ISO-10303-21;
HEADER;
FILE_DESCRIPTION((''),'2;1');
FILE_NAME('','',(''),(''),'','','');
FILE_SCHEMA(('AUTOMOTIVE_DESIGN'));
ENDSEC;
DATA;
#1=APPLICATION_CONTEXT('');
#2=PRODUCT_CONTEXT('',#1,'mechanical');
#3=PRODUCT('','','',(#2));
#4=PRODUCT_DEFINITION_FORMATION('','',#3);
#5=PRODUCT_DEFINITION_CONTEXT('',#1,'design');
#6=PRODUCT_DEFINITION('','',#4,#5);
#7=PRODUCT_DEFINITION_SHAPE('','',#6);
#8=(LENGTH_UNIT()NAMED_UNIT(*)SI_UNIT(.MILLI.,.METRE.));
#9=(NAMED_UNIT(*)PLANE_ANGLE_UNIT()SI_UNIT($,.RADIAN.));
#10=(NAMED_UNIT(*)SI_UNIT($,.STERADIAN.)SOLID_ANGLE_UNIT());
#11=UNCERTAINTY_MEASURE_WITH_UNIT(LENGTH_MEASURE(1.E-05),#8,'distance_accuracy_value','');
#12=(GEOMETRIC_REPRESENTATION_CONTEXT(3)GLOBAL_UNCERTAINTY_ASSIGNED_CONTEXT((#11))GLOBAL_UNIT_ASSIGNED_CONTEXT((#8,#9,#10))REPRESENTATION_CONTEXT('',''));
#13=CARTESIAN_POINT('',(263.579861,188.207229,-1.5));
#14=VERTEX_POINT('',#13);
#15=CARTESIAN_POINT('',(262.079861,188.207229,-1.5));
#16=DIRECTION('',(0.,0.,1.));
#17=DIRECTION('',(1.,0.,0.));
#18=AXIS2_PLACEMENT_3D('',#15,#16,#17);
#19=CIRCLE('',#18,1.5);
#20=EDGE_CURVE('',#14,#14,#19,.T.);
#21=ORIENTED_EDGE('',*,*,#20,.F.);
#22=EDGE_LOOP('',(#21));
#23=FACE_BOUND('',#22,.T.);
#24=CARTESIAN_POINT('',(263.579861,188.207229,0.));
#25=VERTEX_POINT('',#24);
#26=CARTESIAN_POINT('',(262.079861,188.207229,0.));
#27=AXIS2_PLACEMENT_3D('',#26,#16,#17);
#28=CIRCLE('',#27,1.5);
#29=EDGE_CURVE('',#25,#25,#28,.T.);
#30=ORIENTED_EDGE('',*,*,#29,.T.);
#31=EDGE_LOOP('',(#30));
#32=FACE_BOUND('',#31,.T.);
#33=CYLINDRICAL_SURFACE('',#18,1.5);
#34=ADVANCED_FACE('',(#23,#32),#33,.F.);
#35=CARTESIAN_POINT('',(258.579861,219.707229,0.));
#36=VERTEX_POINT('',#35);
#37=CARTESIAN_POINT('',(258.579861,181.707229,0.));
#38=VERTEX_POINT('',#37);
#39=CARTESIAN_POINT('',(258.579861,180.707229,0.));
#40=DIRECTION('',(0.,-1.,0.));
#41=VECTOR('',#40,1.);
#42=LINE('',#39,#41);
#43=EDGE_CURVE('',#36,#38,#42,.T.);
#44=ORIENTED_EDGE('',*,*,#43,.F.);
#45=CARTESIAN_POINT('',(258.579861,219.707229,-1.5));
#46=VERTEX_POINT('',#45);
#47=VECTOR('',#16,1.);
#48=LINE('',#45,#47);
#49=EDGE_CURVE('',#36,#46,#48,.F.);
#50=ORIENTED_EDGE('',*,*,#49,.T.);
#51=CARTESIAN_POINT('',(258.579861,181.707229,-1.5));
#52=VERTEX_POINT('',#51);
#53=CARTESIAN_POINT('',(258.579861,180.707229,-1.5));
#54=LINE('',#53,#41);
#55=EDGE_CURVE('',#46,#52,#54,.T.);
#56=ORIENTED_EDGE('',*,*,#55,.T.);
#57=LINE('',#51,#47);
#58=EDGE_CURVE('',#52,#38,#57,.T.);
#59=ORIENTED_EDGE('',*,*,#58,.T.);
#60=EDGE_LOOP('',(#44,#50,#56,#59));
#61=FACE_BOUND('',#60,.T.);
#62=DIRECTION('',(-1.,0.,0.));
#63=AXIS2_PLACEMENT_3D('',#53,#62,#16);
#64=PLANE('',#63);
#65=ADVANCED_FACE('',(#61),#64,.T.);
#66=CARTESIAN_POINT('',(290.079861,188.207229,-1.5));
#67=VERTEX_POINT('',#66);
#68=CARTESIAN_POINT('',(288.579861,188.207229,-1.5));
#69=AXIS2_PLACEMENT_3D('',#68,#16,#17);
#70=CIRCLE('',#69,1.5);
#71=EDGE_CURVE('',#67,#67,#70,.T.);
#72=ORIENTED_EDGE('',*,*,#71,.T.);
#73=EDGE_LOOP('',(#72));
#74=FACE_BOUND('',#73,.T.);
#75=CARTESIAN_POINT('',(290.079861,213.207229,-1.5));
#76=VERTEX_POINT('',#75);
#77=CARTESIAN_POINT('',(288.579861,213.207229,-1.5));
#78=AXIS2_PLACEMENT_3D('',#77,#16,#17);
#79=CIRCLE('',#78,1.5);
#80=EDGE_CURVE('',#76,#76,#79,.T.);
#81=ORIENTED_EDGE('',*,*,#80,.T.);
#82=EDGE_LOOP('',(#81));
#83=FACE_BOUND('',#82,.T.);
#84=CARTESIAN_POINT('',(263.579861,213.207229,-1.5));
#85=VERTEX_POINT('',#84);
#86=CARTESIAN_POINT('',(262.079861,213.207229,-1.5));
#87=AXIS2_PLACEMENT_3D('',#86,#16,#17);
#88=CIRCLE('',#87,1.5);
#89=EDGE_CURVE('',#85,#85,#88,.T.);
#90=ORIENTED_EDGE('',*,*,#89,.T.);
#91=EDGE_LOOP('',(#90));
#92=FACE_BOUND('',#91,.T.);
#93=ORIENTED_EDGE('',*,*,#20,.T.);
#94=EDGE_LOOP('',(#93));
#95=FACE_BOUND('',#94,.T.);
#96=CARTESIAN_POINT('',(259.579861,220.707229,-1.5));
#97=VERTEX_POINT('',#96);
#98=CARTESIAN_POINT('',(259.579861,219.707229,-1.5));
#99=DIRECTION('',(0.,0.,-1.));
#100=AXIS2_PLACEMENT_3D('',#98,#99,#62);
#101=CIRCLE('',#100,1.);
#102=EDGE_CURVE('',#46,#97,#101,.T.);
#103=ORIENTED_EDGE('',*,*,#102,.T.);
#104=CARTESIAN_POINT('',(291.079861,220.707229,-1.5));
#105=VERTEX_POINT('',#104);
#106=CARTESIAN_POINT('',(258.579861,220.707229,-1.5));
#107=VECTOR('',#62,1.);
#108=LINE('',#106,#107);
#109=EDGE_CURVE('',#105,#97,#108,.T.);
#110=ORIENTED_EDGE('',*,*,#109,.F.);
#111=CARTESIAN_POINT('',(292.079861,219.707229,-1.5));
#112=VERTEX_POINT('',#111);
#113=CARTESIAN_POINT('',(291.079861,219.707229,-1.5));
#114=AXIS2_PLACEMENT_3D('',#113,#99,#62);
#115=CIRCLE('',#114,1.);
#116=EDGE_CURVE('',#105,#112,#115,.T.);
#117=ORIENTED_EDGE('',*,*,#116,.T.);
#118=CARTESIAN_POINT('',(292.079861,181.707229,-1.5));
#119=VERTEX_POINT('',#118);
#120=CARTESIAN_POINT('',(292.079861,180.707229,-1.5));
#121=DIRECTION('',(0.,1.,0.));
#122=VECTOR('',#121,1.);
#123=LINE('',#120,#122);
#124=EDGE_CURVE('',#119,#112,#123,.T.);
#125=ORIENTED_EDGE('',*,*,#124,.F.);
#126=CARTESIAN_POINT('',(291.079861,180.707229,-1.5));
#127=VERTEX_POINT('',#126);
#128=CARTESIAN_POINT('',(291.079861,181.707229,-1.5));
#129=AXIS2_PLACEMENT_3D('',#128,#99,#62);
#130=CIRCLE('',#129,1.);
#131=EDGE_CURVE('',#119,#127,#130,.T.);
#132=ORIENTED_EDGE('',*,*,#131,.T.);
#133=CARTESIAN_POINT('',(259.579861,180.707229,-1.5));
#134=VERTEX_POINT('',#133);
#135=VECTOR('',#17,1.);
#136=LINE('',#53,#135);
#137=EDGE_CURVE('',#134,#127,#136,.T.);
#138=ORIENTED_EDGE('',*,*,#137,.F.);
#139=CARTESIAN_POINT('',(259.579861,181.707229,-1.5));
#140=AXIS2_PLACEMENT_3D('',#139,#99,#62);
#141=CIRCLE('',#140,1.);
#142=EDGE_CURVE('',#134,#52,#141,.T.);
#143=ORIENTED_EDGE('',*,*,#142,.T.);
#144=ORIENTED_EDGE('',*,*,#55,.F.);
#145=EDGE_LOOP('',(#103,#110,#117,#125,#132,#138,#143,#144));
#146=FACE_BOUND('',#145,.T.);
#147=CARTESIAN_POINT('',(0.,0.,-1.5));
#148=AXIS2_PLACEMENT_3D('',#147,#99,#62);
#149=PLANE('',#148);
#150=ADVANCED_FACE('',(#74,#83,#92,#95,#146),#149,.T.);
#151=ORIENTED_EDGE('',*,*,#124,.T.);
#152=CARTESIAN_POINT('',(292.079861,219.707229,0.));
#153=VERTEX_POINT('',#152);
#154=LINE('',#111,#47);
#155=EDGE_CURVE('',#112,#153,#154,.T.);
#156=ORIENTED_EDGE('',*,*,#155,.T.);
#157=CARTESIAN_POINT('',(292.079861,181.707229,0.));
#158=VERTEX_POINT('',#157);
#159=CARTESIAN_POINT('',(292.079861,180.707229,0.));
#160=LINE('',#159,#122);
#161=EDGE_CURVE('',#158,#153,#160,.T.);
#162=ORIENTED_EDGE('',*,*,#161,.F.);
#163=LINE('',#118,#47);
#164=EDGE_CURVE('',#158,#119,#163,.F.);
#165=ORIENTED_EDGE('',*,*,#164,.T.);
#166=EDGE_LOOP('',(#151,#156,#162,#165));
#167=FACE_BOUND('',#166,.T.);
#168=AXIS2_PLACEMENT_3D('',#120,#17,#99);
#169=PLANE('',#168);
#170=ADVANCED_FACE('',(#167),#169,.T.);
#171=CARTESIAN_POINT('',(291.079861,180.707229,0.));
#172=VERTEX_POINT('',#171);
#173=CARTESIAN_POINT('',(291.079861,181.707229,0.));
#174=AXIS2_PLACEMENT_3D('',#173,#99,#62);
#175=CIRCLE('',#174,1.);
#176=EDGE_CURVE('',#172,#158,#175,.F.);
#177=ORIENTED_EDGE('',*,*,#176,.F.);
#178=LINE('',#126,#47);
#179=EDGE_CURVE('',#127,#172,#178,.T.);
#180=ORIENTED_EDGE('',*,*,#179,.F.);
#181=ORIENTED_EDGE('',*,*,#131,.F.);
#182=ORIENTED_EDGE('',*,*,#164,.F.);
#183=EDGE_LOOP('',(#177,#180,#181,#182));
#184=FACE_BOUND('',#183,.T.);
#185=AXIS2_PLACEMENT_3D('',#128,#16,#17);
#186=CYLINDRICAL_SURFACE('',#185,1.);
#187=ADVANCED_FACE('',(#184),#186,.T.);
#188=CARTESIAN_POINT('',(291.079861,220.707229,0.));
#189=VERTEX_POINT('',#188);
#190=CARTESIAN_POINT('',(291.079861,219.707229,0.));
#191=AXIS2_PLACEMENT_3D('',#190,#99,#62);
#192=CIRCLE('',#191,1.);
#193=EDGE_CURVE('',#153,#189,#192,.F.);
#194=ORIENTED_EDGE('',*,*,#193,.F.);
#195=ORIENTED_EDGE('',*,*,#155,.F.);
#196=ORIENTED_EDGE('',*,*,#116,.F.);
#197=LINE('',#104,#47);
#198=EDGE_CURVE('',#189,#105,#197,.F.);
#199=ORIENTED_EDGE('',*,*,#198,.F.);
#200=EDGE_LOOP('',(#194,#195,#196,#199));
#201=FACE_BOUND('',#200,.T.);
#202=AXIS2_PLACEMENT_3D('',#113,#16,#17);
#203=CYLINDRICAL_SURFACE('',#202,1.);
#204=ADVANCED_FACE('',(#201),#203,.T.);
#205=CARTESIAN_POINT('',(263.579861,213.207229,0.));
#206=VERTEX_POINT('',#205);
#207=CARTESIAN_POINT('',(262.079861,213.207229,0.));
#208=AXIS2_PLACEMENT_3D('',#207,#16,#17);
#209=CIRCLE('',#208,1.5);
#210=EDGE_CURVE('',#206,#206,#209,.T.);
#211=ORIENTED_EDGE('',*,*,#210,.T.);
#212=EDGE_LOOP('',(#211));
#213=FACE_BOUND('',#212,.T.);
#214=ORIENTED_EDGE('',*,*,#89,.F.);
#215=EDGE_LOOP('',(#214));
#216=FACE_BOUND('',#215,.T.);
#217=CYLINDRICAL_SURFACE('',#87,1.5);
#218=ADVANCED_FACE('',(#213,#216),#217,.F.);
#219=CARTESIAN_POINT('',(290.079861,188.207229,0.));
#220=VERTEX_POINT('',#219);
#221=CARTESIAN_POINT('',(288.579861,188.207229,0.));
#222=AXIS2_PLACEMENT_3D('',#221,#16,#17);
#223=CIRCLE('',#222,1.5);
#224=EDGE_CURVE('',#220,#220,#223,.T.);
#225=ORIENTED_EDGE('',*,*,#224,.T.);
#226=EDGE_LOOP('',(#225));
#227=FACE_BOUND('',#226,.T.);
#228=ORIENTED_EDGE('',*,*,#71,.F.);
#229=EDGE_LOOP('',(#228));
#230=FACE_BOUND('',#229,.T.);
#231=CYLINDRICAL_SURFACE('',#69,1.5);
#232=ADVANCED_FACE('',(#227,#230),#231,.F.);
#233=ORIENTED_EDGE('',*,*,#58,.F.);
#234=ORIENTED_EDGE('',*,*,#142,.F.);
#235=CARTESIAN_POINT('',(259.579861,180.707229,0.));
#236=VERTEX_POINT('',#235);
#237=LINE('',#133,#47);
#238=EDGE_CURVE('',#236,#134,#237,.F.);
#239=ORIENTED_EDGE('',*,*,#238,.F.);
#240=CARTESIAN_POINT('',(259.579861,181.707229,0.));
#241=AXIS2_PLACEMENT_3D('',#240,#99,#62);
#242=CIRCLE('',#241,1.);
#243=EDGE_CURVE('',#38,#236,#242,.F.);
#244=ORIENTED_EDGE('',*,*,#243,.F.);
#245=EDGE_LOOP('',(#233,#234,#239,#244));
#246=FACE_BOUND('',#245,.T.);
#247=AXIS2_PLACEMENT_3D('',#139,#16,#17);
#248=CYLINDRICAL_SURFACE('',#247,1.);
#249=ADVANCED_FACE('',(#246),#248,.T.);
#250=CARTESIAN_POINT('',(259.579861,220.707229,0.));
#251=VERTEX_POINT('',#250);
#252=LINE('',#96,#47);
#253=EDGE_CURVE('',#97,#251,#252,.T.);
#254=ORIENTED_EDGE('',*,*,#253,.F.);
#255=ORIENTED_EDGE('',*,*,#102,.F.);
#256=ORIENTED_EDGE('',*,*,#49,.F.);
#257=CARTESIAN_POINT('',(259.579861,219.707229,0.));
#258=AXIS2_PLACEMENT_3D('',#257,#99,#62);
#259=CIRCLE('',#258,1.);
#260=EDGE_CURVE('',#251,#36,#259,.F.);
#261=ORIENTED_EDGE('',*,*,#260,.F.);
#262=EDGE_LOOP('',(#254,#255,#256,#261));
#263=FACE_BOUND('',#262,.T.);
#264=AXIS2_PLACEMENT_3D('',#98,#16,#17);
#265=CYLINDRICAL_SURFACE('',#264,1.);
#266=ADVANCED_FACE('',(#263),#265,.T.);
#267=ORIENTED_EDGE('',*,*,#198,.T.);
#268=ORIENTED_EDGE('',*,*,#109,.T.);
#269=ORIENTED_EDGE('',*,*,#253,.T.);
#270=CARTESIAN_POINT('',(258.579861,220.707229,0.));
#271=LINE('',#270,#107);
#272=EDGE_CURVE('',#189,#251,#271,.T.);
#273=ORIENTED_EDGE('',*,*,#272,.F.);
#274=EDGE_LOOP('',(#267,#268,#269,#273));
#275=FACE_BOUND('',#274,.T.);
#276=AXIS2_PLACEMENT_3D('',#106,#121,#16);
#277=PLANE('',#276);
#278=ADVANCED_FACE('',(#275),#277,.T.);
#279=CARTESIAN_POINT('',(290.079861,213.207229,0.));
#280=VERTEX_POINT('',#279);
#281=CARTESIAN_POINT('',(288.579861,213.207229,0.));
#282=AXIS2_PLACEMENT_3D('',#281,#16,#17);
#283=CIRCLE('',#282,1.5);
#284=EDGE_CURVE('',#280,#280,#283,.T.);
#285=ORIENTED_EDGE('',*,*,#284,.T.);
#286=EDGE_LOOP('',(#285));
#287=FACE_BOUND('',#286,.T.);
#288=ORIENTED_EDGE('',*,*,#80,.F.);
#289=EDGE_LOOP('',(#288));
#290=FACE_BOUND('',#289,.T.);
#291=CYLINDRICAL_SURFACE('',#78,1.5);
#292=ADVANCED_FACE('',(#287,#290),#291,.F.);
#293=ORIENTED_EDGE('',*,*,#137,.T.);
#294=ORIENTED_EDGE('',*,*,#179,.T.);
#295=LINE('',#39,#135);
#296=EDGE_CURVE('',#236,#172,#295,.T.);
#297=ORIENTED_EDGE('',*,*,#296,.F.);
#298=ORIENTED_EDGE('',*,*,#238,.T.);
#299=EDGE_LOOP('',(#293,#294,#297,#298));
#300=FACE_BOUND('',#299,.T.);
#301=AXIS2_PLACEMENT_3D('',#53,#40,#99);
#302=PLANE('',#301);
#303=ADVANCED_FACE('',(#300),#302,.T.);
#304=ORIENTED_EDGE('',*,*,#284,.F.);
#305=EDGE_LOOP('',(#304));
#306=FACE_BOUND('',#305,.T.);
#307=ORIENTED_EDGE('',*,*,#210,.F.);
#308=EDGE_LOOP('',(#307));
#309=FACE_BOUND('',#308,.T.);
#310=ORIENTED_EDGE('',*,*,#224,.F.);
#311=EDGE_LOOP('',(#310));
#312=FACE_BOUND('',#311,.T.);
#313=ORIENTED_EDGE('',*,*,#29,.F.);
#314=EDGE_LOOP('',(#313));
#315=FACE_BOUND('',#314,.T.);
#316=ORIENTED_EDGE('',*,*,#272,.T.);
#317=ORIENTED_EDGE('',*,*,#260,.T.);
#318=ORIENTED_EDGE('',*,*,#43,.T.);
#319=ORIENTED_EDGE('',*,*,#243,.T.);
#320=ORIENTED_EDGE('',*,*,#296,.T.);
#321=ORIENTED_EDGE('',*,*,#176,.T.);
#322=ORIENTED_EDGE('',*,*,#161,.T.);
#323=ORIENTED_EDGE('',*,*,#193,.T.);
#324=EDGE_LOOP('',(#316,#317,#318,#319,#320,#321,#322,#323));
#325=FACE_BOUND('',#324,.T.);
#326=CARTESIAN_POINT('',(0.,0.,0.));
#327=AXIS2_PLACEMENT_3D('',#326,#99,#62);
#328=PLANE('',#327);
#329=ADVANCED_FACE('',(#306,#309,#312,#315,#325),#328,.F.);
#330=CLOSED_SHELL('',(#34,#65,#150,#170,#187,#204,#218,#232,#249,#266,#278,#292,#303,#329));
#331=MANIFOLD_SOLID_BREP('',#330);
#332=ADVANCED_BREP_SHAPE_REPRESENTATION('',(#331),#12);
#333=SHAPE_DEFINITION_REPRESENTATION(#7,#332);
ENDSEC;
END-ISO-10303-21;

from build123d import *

# Parameters (mm, degrees)
SKETCH2_W          = 33.5
SKETCH2_H          = 40
SKETCH2_R          = 1.5
BASE_FLANGE1_DEPTH = 1.5
FILLET1_R          = 1


# Sheet-metal steps are written as plain solids
with BuildPart() as part:
    # Sketch2 → Base-Flange1 (new body)
    with BuildSketch(Plane.XY):
        with Locations((275.329860694, 200.707229453)):
            Rectangle(SKETCH2_W, SKETCH2_H)
        with Locations((288.579860694, 213.207229453)):
            Circle(SKETCH2_R, mode=Mode.SUBTRACT)
        with Locations((288.579860694, 188.207229453)):
            Circle(SKETCH2_R, mode=Mode.SUBTRACT)
        with Locations((262.079860694, 213.207229453)):
            Circle(SKETCH2_R, mode=Mode.SUBTRACT)
        with Locations((262.079860694, 188.207229453)):
            Circle(SKETCH2_R, mode=Mode.SUBTRACT)
    extrude(amount=-BASE_FLANGE1_DEPTH)

    # Fillet1
    fillet1_edges = [part.edges().sort_by_distance(p)[0] for p in [
        (258.579860694, 220.707229453, -0.75),
        (292.079860694, 220.707229453, -0.75),
        (292.079860694, 180.707229453, -0.75),
        (258.579860694, 180.707229453, -0.75),
    ]]
    fillet(fillet1_edges, radius=FILLET1_R)


solid = part.part
